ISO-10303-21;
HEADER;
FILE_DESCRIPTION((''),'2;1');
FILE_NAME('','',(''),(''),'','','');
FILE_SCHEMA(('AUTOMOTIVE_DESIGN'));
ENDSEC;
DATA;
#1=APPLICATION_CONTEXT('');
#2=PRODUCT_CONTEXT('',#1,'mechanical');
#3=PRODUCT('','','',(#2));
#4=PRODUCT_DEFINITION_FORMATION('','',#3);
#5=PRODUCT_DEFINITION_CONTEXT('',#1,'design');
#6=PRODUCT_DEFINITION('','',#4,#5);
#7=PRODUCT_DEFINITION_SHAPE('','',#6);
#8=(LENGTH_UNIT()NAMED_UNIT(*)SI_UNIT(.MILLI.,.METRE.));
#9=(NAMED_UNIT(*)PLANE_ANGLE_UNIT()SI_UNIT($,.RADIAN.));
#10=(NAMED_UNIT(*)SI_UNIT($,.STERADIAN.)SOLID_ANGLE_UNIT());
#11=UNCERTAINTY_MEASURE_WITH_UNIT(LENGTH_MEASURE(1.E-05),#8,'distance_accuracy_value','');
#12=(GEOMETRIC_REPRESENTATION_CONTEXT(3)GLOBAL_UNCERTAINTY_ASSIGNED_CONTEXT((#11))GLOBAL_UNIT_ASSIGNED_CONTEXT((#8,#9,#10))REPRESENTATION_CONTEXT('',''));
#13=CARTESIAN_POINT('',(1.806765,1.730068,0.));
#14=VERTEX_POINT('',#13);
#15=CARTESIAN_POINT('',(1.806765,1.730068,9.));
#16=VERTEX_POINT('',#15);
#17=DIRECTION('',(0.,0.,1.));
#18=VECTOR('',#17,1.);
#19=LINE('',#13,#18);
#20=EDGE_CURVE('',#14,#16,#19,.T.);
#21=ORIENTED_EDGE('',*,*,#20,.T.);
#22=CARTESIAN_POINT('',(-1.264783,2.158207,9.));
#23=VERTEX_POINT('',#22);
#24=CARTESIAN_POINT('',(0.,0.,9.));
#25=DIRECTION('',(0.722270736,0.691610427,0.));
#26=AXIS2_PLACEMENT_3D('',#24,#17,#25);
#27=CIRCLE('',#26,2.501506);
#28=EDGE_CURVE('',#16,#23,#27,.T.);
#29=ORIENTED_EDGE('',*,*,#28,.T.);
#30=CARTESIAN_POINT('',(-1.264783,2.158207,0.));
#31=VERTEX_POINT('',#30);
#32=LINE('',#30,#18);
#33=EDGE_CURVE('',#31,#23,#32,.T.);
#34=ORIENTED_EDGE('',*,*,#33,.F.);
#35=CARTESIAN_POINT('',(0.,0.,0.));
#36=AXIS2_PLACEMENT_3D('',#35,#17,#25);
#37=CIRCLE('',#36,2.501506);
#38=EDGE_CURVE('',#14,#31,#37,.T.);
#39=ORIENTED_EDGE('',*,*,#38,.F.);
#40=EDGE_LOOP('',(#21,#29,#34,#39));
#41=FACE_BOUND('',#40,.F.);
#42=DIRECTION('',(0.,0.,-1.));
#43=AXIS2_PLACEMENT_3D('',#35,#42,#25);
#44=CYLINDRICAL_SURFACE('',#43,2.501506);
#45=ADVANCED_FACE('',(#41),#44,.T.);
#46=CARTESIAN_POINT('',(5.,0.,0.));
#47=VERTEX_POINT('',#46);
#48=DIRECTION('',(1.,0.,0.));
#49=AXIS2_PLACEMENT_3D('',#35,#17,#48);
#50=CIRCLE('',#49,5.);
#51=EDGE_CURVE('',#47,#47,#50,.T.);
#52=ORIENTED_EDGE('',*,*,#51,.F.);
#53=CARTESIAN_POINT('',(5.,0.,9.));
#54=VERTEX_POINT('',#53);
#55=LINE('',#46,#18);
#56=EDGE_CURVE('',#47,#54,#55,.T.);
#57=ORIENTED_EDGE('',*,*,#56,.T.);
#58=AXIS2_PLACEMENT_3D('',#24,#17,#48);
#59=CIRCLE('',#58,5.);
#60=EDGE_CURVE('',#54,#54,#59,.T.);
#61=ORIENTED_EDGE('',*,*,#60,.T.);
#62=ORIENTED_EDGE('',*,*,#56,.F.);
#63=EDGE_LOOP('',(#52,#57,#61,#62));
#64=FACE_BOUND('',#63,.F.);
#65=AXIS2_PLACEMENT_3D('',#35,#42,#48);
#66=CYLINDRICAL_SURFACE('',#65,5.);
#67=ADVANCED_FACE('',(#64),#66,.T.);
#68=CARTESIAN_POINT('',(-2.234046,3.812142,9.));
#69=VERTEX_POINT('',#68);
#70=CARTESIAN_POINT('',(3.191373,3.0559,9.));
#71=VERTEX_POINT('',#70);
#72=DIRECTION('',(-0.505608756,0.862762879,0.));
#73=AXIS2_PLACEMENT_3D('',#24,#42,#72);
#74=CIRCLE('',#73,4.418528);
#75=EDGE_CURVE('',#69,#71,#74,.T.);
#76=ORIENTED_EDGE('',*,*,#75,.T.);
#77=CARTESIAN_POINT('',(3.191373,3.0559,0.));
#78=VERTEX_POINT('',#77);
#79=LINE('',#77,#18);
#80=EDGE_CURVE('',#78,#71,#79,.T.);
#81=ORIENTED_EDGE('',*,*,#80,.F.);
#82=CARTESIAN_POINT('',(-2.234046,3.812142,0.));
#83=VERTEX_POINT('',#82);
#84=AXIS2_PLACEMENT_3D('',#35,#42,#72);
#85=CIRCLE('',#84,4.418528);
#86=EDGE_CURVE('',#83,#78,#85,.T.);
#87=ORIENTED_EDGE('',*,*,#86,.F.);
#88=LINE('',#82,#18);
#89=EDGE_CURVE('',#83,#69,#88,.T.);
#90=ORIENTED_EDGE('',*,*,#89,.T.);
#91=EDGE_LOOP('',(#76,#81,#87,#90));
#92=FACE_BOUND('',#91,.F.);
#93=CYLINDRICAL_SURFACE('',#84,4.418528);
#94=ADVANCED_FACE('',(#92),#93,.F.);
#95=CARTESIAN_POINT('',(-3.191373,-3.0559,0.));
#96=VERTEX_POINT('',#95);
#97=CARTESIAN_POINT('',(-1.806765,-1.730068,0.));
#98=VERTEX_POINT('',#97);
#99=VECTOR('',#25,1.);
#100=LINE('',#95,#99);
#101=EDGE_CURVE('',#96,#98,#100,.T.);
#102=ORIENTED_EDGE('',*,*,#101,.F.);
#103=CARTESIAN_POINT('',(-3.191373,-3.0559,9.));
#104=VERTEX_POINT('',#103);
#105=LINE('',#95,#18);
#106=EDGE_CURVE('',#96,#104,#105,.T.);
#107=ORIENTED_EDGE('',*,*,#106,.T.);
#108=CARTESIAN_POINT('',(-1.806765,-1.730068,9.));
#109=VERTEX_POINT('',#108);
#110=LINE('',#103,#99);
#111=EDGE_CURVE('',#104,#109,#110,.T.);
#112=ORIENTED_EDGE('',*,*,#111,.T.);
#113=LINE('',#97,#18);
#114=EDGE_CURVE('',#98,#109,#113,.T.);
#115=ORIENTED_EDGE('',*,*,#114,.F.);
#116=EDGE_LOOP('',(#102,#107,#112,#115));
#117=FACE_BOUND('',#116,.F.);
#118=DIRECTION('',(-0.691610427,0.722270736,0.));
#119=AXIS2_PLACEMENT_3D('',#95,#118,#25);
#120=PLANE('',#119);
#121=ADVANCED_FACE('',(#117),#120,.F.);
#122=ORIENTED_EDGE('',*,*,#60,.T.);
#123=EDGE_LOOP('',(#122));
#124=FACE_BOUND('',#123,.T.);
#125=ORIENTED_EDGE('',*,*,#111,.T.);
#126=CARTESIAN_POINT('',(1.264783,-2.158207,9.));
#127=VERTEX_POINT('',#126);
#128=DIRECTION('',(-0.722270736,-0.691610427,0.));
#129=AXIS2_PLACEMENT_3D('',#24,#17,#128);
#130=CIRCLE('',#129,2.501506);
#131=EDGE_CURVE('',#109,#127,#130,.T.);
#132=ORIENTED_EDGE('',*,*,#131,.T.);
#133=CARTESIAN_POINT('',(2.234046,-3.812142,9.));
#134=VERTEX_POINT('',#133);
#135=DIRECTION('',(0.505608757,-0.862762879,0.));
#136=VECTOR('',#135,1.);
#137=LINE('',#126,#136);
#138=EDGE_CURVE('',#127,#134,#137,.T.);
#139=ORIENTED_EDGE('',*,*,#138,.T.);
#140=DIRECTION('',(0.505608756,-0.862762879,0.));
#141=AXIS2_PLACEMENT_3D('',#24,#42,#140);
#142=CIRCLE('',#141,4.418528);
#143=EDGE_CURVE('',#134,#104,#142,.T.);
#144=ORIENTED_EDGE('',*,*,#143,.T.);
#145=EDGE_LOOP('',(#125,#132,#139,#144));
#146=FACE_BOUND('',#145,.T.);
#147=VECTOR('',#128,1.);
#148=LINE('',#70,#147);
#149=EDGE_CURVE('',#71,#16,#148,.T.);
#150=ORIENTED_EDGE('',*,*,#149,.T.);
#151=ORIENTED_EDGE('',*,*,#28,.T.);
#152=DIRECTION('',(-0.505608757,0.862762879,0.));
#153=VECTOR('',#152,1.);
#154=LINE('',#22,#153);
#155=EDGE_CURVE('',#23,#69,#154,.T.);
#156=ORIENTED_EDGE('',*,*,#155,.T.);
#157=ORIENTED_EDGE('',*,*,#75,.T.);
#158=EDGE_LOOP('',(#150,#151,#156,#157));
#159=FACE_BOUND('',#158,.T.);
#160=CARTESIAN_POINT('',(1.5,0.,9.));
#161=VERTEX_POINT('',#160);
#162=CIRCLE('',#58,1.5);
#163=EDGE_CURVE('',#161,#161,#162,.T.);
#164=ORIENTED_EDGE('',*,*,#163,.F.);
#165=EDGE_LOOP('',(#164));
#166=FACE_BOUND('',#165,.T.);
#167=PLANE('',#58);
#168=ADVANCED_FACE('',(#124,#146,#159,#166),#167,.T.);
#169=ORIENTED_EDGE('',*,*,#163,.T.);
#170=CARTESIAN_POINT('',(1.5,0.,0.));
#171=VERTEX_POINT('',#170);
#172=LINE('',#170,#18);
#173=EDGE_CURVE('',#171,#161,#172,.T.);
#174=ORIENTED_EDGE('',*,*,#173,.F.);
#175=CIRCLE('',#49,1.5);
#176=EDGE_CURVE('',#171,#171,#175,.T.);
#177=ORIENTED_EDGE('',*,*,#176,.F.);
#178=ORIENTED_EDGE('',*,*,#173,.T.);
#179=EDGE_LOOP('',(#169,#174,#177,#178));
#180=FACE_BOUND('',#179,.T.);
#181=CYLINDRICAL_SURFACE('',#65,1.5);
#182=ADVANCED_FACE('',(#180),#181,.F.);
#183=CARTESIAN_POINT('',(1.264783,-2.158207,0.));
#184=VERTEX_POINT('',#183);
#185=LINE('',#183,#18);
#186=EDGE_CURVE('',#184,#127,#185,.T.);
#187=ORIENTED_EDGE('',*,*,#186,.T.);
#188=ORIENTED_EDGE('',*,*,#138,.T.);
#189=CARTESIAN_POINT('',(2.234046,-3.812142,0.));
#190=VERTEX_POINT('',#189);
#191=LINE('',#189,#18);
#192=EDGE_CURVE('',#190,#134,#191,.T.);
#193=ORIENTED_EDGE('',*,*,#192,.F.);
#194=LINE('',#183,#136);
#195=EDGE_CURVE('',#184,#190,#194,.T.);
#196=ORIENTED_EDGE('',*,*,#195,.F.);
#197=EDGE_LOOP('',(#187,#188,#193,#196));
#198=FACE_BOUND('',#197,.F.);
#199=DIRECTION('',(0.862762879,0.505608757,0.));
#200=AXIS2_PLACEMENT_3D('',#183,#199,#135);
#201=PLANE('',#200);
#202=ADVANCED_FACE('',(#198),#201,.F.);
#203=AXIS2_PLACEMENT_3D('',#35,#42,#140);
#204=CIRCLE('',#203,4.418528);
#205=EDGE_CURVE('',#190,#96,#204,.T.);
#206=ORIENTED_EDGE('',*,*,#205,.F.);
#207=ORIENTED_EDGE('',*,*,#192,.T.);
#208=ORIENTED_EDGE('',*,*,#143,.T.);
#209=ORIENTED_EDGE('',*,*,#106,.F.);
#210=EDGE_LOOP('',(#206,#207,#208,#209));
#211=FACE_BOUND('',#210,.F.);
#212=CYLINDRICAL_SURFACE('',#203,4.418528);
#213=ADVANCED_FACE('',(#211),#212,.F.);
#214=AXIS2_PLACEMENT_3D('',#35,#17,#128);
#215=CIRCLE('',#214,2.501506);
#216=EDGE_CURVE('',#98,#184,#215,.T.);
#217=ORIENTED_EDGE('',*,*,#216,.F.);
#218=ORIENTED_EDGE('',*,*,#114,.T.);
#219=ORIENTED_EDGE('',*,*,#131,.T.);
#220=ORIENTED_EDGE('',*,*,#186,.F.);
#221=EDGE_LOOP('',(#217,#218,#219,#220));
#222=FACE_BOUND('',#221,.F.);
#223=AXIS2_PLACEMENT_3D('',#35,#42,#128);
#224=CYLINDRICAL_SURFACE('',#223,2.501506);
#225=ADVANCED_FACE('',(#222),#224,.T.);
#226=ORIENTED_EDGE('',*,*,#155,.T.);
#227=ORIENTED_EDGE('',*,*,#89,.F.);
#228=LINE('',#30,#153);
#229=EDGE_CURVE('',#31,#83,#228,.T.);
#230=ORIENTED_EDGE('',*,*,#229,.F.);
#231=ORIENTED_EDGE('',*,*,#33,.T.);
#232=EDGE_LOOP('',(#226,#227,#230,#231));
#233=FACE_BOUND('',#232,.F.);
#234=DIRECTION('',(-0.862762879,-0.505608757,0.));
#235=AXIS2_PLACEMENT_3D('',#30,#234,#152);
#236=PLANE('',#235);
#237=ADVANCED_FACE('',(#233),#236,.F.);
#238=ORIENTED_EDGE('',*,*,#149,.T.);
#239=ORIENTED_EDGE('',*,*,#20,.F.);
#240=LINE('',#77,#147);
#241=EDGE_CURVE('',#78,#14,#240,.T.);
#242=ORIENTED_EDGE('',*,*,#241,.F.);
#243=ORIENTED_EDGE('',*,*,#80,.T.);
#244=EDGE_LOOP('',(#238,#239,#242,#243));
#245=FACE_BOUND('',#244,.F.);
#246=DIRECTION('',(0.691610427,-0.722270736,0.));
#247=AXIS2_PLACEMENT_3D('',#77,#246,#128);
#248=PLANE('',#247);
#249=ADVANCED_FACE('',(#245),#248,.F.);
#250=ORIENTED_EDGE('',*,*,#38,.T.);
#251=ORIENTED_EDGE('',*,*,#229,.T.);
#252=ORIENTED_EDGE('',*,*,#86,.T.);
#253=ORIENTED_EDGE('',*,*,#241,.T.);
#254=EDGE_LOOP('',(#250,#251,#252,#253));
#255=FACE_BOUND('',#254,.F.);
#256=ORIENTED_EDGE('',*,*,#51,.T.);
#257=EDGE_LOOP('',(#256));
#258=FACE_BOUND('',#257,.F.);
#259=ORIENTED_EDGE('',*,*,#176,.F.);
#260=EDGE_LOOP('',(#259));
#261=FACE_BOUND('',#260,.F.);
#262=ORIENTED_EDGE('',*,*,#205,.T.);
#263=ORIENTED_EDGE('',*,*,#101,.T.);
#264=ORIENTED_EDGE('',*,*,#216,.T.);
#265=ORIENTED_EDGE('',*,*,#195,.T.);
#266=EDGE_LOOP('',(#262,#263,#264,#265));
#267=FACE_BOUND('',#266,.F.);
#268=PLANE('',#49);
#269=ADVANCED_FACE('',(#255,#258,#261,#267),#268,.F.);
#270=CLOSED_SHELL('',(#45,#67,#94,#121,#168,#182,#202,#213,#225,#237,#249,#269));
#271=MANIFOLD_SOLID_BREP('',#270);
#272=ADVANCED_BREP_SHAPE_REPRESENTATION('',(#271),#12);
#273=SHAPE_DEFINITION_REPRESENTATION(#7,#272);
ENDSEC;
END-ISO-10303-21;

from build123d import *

# Parameters (mm, degrees)
F0_R     = 5
F0_R_2   = 1.5
F1_DEPTH = 9


# Not quite as in the source:
# - a feature names something its author has since deleted; it is built from what else it names


with BuildPart() as f1:
    # F0 (on Top) → F1 (new body)
    with BuildSketch(Plane.XY):
        Circle(F0_R)
        with BuildLine():
            ThreePointArc((-1.8067647919, -1.7300678361), (-0.3453428308, -2.4775536442), (1.2647834859, -2.1582067706))
            Line((1.2647834859, -2.1582067706), (2.2340463063, -3.8121416967))
            ThreePointArc((2.2340463063, -3.8121416967), (-0.6099952159, -4.3762190359), (-3.1913732702, -3.0558998452))
            Line((-3.1913732702, -3.0558998452), (-1.8067647919, -1.7300678361))
        make_face(mode=Mode.SUBTRACT)
        Circle(F0_R_2, mode=Mode.SUBTRACT)
        with BuildLine():
            ThreePointArc((-2.2340463063, 3.8121416967), (0.6099952159, 4.3762190359), (3.1913732702, 3.0558998452))
            Line((3.1913732702, 3.0558998452), (1.8067647919, 1.7300678361))
            ThreePointArc((1.8067647919, 1.7300678361), (0.3453428308, 2.4775536442), (-1.2647834859, 2.1582067706))
            Line((-1.2647834859, 2.1582067706), (-2.2340463063, 3.8121416967))
        make_face(mode=Mode.SUBTRACT)
    extrude(amount=F1_DEPTH)


solid = f1.part
